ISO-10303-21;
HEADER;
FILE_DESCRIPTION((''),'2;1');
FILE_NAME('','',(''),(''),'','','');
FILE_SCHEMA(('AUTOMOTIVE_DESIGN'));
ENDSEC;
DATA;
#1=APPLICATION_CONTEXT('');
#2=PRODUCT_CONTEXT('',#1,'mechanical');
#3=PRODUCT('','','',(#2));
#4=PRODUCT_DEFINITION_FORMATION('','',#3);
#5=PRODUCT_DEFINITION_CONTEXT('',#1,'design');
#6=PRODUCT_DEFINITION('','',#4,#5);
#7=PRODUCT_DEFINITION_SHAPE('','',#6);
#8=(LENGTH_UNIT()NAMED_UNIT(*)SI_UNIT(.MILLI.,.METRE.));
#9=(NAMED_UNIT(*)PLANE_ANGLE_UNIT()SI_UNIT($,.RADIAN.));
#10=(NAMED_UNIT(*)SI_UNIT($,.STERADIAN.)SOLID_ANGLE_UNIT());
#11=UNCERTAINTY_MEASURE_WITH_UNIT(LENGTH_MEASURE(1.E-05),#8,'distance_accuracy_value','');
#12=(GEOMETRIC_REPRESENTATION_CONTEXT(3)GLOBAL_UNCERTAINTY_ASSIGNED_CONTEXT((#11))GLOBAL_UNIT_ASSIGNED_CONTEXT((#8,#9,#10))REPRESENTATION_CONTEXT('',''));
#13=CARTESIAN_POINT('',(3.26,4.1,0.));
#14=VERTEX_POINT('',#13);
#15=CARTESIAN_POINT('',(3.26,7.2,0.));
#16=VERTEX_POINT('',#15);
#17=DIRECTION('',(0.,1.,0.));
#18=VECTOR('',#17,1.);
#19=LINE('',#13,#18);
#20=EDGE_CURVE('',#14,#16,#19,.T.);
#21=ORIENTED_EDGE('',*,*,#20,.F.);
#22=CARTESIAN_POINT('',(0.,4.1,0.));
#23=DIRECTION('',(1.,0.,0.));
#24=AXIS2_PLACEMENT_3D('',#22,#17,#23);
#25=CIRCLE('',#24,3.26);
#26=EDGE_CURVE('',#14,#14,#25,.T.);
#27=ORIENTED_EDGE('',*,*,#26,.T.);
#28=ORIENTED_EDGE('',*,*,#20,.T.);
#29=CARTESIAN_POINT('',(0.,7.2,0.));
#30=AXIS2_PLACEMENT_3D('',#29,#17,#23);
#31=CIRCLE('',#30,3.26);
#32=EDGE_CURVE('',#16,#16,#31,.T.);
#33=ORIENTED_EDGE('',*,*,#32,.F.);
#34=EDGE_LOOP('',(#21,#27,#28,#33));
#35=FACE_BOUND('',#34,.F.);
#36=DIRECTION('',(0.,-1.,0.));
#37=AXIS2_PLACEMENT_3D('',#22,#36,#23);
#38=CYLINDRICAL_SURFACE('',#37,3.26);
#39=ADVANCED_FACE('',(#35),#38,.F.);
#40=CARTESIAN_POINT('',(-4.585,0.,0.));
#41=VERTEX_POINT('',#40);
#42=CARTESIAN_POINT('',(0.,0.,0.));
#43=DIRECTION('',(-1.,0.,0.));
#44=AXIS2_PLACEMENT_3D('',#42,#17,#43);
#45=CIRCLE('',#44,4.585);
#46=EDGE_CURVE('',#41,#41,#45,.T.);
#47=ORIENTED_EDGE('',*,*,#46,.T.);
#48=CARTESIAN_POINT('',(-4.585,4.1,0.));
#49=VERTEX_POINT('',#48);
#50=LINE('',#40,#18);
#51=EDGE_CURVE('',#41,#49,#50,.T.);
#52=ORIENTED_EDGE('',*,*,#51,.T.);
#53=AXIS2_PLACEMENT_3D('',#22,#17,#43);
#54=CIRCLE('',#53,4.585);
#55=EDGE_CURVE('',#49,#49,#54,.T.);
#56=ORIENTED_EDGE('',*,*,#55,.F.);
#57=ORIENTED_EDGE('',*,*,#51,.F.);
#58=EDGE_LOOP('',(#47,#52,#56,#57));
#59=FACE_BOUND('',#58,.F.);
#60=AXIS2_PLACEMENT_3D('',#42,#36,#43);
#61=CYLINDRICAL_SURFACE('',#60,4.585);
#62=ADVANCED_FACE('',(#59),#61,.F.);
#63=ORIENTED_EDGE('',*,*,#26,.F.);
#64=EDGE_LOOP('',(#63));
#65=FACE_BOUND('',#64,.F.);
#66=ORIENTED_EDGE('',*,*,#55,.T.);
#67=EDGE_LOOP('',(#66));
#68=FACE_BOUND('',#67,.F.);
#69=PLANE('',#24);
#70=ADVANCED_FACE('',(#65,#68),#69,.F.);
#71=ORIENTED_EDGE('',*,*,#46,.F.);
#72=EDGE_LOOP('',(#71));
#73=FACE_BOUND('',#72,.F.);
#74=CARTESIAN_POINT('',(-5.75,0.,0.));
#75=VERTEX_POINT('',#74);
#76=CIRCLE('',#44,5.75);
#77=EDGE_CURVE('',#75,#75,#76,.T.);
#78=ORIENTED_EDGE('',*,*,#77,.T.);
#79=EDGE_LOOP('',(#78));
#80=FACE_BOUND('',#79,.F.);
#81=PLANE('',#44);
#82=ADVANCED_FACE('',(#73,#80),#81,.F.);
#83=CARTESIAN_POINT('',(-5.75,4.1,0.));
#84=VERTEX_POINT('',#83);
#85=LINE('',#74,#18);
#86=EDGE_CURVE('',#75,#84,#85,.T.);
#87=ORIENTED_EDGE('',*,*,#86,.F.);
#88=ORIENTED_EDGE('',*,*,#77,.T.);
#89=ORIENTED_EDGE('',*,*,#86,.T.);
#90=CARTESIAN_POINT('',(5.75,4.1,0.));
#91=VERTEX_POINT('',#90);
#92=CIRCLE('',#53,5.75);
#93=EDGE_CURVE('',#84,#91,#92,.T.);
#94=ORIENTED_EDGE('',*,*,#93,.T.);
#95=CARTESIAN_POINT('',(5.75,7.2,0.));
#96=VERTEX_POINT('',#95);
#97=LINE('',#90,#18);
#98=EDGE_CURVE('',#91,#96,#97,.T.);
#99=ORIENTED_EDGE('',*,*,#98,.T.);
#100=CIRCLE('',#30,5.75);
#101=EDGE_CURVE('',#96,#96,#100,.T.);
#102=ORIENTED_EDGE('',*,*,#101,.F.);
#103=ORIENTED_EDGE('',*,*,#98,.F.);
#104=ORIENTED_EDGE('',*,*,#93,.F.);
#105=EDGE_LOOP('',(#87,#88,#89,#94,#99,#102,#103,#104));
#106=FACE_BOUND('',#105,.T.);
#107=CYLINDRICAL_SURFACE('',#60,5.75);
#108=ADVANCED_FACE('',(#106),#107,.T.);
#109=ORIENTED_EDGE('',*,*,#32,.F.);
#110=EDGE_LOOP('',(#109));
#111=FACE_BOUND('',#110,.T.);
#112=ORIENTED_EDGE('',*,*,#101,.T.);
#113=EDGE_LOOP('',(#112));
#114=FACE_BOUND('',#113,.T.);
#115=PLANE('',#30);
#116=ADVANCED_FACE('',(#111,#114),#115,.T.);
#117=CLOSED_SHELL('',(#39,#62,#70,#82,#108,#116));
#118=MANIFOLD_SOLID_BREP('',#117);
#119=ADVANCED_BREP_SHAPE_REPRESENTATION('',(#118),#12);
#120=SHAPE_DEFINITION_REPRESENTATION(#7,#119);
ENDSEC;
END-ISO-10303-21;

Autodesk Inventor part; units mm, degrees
ref_plane "YZ Plane" through (0, 0, 0) normal (1, 0, 0) x (0, 1, 0)
ref_plane "XZ Plane" through (0, 0, 0) normal (0, 1, 0) x (-1, 0, 0)
ref_plane "XY Plane" through (0, 0, 0) normal (0, 0, 1) x (1, 0, 0)
sketch "Sketch1" plane through (0, 0, 0) normal (0, 1, 0) x (-1, 0, 0)
  circle A0 centre (0, 0) radius 4.585
  circle A1 centre (0, 0) radius 5.75
  dimension "d0" = 9.17
  dimension "d1" = 11.5
extrude "Extrusion1" add sketch "Sketch1" along normal blind 4.1
sketch "Sketch2" plane through (0, 4.1, 0) normal (0, 1, 0) x (1, 0, 0)
  circle A0 centre (0, 0) radius 5.75
  circle A1 centre (0, 0) radius 3.26
  dimension "d4" = 6.52
  dimension "d7" = 11.5
extrude "Extrusion2" add sketch "Sketch2" along normal blind 3.1
properties part number "Motor_Magnet_Mount"
